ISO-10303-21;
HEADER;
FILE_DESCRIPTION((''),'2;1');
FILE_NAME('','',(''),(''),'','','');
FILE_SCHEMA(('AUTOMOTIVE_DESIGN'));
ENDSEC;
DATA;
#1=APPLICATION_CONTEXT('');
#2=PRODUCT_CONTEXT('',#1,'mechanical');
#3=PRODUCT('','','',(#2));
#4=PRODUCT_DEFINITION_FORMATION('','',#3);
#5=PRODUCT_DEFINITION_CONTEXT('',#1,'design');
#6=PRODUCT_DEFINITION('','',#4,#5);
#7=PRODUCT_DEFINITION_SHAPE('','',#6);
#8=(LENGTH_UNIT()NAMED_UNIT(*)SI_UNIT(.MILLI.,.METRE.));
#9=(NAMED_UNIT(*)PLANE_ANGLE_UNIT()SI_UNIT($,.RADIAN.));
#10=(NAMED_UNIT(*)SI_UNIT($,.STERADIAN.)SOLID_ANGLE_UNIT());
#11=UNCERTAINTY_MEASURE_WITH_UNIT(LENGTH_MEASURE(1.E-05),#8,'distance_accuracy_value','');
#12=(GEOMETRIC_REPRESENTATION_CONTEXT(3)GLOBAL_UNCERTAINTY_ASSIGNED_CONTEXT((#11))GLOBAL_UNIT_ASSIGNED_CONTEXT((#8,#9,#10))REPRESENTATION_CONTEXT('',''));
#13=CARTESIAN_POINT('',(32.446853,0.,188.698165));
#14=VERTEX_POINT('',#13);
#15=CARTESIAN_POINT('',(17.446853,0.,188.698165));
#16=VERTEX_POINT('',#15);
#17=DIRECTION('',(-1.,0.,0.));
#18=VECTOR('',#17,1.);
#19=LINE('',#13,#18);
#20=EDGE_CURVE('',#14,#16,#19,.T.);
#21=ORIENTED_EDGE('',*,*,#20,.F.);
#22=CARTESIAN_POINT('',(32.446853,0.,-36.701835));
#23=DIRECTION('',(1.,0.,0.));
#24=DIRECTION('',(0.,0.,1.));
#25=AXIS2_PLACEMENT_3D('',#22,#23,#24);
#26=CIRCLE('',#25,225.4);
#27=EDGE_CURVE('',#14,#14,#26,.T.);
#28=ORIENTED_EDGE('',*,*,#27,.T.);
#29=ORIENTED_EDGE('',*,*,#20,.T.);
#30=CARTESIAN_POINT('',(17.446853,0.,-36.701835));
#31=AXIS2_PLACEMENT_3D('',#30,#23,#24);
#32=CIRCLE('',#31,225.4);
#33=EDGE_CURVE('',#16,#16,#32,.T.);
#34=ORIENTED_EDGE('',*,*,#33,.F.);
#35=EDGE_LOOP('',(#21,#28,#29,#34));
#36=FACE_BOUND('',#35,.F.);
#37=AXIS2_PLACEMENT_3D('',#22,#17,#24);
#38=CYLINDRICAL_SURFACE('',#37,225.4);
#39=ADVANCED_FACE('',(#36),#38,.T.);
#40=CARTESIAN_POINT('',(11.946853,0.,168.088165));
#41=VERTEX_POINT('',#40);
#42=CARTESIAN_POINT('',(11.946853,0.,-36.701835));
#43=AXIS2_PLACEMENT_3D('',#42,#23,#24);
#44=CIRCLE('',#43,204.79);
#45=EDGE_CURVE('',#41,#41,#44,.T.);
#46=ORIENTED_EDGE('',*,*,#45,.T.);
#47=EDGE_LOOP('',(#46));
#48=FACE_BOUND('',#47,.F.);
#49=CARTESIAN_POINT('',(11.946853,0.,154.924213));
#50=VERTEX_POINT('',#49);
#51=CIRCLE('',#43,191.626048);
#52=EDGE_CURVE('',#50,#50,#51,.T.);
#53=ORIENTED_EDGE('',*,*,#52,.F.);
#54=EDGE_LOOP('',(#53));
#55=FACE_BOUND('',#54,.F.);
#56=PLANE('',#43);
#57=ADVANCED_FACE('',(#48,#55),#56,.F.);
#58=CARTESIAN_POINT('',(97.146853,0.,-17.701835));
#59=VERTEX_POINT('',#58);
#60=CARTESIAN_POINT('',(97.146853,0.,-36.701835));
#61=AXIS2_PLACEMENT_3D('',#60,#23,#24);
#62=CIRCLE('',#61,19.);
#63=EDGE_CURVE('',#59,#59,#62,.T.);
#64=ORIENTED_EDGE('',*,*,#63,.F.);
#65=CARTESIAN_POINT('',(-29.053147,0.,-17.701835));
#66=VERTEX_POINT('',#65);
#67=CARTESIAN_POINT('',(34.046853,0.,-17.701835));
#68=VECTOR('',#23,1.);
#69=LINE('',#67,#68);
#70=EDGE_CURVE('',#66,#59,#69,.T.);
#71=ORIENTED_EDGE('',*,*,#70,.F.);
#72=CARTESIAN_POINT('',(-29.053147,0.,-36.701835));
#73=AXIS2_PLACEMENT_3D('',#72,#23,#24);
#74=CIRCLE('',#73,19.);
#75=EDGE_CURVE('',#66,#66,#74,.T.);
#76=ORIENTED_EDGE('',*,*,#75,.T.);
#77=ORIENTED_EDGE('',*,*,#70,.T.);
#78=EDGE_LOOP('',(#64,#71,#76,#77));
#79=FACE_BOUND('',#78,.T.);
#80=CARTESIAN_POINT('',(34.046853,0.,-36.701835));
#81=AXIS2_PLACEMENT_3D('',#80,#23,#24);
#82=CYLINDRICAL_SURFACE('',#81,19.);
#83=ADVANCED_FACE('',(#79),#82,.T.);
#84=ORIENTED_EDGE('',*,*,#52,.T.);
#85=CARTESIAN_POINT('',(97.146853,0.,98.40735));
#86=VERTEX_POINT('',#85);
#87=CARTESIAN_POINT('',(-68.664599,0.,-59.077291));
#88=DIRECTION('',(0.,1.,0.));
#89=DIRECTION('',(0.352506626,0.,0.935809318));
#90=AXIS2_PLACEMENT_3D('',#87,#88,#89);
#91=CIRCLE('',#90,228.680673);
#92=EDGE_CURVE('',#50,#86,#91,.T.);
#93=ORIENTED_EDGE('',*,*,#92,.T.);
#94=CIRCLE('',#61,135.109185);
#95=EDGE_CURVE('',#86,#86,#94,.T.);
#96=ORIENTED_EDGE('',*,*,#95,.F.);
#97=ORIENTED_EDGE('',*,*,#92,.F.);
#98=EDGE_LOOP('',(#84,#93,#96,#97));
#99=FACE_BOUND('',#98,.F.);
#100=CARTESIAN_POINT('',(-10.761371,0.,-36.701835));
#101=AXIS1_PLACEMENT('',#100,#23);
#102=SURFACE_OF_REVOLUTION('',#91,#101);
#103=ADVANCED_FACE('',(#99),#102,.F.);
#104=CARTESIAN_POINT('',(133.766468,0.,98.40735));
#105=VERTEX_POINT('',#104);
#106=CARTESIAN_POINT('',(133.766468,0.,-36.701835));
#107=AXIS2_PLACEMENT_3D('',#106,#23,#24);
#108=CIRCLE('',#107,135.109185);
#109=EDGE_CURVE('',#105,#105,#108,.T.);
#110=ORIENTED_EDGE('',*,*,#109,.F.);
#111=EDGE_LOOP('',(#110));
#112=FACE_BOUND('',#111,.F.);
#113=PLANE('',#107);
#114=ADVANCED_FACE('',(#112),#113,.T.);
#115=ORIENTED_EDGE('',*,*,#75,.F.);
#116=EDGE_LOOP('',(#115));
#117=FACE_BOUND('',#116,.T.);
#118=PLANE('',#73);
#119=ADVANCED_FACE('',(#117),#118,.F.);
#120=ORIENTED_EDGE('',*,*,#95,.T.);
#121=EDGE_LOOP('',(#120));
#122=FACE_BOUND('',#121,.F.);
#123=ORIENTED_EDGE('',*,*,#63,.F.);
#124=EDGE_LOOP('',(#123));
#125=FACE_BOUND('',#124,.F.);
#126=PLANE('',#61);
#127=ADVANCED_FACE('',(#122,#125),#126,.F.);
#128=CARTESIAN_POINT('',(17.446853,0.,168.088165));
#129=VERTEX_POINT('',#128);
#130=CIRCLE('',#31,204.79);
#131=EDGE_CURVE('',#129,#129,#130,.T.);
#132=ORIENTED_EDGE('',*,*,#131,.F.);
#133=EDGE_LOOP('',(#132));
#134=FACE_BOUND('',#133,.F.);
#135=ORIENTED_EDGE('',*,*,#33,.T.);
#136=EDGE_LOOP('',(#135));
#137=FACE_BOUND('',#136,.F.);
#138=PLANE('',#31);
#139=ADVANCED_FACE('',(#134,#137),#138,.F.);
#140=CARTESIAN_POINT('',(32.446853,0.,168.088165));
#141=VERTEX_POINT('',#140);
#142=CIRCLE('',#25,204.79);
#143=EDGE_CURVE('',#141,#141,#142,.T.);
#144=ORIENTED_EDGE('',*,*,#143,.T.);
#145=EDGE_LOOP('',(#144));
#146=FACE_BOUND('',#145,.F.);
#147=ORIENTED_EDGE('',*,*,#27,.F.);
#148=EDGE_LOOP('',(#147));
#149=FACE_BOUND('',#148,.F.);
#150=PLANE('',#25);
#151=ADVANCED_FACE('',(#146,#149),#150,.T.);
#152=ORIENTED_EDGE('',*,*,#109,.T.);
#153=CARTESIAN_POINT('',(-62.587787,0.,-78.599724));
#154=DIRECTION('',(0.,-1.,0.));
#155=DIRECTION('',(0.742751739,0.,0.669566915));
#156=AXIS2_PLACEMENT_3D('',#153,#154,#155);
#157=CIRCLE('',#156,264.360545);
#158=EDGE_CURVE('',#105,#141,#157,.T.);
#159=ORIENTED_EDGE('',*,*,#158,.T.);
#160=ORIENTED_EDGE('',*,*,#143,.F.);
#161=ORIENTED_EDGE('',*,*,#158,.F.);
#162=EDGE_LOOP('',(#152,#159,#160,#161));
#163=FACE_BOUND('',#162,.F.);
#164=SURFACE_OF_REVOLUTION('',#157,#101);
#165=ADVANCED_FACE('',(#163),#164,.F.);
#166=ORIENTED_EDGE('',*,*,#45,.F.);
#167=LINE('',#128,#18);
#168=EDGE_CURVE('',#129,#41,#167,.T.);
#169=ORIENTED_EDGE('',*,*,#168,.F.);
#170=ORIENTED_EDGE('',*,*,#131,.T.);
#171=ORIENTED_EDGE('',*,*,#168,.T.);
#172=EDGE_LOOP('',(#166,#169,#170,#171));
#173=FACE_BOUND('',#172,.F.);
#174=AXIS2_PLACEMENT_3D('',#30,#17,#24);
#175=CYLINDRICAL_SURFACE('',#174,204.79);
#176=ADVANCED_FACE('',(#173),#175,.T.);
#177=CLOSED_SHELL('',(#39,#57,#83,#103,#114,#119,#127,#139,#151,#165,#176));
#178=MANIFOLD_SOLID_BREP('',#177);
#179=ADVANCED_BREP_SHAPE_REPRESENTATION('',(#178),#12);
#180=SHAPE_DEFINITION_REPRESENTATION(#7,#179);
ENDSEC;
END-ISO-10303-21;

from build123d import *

# Parameters (mm, degrees)
F0_W = 126.2
F0_H = 19


with BuildPart() as f1:
    # F0 (on Front) → F1 (revolve)
    with BuildSketch(Plane.XZ):
        with BuildLine():
            Line((97.1468534022, 98.407350273), (97.1468534022, -17.7018346759))
            Line((97.1468534022, -17.7018346759), (97.1468534022, -36.7018346759))
            Line((97.1468534022, -36.7018346759), (133.7664675539, -36.7018346759))
            Line((133.7664675539, -36.7018346759), (133.7664675539, 98.407350273))
            ThreePointArc((133.7664675539, 98.407350273), (87.2145027715, 139.2207791512), (32.4468534022, 168.0881653241))
            Line((32.4468534022, 168.0881653241), (32.4468534022, 188.6981653241))
            Line((32.4468534022, 188.6981653241), (17.4468534022, 188.6981653241))
            Line((17.4468534022, 188.6981653241), (17.4468534022, 168.0881653241))
            Line((17.4468534022, 168.0881653241), (11.9468534022, 168.0881653241))
            Line((11.9468534022, 168.0881653241), (11.9468534022, 154.9242128815))
            ThreePointArc((11.9468534022, 154.9242128815), (57.7458473392, 131.4883118958), (97.1468534022, 98.407350273))
        make_face()
        with Locations((34.0468534022, -27.2018346759)):
            Rectangle(F0_W, F0_H)
    revolve(axis=Axis((-10.7613705966, 0, -36.7018346759), (1, 0, 0)))


solid = f1.part
